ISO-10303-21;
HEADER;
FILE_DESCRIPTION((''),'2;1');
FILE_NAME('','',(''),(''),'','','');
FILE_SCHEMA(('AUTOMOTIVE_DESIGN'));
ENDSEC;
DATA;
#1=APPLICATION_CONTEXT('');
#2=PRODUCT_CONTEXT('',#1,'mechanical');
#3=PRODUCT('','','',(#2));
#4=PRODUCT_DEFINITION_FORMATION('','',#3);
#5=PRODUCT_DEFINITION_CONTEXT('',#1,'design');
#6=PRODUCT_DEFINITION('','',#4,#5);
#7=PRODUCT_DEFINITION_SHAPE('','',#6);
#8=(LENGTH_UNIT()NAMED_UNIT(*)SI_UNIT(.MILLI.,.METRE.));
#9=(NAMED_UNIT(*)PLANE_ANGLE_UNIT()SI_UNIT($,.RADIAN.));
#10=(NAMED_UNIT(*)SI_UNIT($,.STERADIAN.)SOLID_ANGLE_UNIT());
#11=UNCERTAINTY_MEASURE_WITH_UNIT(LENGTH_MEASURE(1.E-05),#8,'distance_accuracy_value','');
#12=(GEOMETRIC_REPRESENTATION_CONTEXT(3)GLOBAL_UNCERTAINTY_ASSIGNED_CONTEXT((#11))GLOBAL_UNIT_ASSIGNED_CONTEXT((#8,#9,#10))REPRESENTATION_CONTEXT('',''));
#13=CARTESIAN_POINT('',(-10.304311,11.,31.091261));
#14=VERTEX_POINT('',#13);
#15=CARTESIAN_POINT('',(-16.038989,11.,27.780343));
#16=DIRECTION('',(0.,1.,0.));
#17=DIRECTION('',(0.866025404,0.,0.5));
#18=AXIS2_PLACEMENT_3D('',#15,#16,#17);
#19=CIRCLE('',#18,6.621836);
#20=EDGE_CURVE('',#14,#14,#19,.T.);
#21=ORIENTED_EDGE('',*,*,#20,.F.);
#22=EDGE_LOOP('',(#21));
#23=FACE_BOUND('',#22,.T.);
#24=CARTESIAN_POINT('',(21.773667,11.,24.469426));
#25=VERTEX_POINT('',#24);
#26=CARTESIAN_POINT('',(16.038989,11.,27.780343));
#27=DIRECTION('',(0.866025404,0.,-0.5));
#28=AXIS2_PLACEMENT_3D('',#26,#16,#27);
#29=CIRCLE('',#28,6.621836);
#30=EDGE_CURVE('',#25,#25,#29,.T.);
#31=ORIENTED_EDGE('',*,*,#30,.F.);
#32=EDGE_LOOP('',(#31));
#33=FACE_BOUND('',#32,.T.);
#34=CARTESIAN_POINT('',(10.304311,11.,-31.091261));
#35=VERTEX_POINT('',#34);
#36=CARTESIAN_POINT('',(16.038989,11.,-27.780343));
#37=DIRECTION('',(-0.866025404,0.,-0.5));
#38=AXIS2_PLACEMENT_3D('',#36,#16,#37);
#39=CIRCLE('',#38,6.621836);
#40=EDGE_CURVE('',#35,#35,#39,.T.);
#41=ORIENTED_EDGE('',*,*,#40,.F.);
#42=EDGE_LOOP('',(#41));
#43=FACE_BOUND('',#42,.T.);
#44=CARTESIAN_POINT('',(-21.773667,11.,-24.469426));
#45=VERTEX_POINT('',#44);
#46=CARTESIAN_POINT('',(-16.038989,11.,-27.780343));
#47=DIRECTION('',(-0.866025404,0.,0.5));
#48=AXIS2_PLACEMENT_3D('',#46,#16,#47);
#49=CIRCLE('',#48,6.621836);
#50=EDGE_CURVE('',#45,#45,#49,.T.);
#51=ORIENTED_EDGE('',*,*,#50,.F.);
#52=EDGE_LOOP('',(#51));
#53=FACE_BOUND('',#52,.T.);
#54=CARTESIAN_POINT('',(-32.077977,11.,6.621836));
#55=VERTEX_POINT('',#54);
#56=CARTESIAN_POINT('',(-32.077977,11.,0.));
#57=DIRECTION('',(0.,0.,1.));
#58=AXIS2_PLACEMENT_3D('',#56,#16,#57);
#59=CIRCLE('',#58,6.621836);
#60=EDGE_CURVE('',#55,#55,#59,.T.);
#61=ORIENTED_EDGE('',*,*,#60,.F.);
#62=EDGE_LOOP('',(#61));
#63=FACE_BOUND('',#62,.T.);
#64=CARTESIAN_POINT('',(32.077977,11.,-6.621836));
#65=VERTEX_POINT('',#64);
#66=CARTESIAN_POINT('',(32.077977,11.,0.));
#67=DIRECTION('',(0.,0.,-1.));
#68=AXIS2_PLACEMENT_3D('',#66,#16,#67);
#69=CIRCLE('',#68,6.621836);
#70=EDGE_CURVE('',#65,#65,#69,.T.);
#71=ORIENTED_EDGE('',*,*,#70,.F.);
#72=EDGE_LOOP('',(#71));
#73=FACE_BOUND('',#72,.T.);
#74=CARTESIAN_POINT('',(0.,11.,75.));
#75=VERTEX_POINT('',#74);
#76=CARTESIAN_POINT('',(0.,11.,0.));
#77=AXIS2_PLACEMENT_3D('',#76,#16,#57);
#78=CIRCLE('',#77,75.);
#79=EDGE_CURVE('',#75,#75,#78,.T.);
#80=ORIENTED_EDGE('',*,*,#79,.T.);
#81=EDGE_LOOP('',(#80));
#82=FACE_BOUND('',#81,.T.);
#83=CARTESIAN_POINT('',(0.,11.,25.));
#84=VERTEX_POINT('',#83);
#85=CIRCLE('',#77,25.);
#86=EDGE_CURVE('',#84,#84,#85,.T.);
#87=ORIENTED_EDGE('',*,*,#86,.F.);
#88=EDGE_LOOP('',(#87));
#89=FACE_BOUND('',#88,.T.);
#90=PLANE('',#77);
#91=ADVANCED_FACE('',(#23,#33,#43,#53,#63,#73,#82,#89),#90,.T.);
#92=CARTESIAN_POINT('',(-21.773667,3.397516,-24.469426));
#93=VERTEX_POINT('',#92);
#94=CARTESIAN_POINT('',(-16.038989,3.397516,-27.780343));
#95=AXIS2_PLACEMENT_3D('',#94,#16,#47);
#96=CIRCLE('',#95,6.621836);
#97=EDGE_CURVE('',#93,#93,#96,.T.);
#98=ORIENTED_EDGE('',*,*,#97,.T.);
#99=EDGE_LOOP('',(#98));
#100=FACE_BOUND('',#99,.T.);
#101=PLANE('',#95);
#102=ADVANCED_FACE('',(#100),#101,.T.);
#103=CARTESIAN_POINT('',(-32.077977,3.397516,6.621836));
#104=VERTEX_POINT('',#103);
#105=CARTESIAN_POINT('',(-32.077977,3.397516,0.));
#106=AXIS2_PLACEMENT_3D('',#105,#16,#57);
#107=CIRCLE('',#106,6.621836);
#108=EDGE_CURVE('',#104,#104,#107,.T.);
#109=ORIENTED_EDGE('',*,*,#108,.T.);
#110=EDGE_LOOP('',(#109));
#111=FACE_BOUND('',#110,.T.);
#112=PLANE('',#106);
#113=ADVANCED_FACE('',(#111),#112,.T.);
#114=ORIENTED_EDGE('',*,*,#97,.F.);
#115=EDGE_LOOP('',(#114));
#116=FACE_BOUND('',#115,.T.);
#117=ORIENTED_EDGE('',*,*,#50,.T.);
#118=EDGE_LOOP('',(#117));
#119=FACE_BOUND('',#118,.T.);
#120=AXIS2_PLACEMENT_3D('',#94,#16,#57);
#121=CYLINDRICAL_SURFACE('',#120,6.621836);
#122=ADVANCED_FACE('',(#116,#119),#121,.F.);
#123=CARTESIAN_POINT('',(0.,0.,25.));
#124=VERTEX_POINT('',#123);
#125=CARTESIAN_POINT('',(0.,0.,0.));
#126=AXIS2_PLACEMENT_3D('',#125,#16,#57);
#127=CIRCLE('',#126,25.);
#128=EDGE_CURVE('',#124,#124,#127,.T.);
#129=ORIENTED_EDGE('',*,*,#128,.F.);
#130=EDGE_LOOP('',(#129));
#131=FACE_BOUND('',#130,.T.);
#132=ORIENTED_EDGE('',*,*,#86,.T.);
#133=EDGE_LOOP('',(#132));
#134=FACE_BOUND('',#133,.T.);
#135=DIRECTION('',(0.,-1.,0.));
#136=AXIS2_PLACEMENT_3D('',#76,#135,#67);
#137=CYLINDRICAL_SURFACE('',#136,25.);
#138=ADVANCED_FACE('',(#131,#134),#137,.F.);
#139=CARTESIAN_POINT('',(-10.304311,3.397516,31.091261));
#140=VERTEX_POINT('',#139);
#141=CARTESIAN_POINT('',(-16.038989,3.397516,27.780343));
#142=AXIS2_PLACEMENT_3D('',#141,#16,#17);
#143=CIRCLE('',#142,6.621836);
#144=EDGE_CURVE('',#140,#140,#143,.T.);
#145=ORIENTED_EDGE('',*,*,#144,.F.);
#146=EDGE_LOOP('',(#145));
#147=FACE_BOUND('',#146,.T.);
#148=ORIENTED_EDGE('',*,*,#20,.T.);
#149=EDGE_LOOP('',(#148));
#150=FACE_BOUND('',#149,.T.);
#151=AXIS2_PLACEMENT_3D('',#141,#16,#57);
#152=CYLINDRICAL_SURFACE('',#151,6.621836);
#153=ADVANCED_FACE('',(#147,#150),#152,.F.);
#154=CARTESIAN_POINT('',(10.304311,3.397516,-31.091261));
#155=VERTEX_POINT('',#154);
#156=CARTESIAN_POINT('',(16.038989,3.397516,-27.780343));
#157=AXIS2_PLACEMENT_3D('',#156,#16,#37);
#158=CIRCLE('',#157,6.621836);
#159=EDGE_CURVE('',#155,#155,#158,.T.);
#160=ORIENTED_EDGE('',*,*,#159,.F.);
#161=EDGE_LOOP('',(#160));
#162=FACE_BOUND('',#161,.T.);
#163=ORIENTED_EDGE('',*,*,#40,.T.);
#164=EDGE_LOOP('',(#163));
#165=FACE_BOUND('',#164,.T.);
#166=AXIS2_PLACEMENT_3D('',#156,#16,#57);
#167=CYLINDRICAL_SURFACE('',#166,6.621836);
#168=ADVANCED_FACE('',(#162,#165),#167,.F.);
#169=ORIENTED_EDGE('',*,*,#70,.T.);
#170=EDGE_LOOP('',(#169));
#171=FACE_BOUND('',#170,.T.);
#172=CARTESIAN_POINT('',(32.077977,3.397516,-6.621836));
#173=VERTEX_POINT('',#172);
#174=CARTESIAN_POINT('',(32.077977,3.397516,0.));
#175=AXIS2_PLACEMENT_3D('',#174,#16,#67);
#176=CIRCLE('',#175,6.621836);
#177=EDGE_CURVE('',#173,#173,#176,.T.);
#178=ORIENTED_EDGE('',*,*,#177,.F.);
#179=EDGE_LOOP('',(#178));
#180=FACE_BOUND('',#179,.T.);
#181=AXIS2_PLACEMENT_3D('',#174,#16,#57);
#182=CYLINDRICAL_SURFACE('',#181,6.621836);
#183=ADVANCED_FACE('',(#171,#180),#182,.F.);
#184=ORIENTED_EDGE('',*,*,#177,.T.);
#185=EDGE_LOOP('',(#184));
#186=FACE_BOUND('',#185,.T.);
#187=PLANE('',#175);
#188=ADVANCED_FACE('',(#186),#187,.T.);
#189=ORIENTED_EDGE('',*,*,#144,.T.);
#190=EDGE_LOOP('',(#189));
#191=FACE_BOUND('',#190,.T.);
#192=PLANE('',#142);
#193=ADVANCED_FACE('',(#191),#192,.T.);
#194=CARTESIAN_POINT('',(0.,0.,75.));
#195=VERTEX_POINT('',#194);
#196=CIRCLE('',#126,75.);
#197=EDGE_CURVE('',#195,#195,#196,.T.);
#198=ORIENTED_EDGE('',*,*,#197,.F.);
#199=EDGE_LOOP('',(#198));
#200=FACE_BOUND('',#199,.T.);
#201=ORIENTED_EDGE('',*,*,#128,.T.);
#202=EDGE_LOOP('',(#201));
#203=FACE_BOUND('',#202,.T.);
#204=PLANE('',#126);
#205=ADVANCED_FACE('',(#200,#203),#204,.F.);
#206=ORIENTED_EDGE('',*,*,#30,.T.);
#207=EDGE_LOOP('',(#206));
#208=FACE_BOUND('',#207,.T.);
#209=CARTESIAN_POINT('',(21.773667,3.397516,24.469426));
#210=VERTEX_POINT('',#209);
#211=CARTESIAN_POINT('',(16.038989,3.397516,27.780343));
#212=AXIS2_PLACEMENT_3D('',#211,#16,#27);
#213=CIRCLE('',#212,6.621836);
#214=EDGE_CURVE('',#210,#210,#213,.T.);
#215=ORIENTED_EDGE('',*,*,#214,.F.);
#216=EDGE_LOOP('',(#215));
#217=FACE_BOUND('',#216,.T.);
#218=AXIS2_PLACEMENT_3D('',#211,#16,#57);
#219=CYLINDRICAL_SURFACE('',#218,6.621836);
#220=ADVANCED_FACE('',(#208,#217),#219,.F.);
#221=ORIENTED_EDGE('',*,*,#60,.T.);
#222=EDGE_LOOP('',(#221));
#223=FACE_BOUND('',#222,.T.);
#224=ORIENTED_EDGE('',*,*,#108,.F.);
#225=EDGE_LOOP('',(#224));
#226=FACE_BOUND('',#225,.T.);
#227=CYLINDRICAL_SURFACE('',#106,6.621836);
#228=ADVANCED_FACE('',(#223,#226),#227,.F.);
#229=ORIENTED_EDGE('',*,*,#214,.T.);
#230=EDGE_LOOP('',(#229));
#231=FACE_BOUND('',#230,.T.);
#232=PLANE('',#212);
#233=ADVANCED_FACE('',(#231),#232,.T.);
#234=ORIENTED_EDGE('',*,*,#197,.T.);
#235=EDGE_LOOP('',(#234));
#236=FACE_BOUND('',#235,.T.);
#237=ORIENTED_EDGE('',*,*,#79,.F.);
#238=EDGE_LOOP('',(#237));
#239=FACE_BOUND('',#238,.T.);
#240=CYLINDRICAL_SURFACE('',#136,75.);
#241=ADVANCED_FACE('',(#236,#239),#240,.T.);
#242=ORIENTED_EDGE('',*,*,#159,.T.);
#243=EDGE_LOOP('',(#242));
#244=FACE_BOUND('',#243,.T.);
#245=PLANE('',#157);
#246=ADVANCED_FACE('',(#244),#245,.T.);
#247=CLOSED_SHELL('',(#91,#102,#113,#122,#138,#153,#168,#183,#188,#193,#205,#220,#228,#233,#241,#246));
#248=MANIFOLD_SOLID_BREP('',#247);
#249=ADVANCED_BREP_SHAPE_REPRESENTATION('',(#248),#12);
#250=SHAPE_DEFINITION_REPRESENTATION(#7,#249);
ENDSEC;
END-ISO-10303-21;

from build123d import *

# Parameters (mm, degrees)
SKETCH1_R           = 75
BOSS_EXTRUDE1_DEPTH = 11
SKETCH2_R           = 25
CUT_EXTRUDE1_DEPTH  = 107.6348911
SKETCH3_R           = 6.621835616
CUT_EXTRUDE2_DEPTH  = 7.602484305
CIRPATTERN1_COUNT   = 6


with BuildPart() as part:
    # Sketch1 → Boss-Extrude1 (new body)
    with BuildSketch(Plane(origin=(0, 0, 0), x_dir=(1, 0, 0), z_dir=(0, 1, 0))):
        Circle(SKETCH1_R)
    extrude(amount=BOSS_EXTRUDE1_DEPTH)

    # Sketch2 → Cut-Extrude1 (cut, through all)
    with BuildSketch(Plane(origin=(0, 0, 0), x_dir=(1, 0, 0), z_dir=(0, 1, 0))):
        Circle(SKETCH2_R)
    extrude(amount=CUT_EXTRUDE1_DEPTH, mode=Mode.SUBTRACT)

    # Sketch3 → Cut-Extrude2 (cut)
    with BuildSketch(Plane(origin=(0, 11, 0), x_dir=(1, 0, 0), z_dir=(0, 1, 0))):
        with Locations((-32.077977474, 0)):
            Circle(SKETCH3_R)
    cut_extrude2 = extrude(amount=-CUT_EXTRUDE2_DEPTH, mode=Mode.SUBTRACT)

    # CirPattern1: Cut-Extrude2 ×6 about axis
    cirpattern1_axis = Axis((0, 0, 0), (0, 1, 0))
    for i in range(1, CIRPATTERN1_COUNT):
        add(cut_extrude2.rotate(cirpattern1_axis, i * 360 / CIRPATTERN1_COUNT), mode=Mode.SUBTRACT)


solid = part.part
